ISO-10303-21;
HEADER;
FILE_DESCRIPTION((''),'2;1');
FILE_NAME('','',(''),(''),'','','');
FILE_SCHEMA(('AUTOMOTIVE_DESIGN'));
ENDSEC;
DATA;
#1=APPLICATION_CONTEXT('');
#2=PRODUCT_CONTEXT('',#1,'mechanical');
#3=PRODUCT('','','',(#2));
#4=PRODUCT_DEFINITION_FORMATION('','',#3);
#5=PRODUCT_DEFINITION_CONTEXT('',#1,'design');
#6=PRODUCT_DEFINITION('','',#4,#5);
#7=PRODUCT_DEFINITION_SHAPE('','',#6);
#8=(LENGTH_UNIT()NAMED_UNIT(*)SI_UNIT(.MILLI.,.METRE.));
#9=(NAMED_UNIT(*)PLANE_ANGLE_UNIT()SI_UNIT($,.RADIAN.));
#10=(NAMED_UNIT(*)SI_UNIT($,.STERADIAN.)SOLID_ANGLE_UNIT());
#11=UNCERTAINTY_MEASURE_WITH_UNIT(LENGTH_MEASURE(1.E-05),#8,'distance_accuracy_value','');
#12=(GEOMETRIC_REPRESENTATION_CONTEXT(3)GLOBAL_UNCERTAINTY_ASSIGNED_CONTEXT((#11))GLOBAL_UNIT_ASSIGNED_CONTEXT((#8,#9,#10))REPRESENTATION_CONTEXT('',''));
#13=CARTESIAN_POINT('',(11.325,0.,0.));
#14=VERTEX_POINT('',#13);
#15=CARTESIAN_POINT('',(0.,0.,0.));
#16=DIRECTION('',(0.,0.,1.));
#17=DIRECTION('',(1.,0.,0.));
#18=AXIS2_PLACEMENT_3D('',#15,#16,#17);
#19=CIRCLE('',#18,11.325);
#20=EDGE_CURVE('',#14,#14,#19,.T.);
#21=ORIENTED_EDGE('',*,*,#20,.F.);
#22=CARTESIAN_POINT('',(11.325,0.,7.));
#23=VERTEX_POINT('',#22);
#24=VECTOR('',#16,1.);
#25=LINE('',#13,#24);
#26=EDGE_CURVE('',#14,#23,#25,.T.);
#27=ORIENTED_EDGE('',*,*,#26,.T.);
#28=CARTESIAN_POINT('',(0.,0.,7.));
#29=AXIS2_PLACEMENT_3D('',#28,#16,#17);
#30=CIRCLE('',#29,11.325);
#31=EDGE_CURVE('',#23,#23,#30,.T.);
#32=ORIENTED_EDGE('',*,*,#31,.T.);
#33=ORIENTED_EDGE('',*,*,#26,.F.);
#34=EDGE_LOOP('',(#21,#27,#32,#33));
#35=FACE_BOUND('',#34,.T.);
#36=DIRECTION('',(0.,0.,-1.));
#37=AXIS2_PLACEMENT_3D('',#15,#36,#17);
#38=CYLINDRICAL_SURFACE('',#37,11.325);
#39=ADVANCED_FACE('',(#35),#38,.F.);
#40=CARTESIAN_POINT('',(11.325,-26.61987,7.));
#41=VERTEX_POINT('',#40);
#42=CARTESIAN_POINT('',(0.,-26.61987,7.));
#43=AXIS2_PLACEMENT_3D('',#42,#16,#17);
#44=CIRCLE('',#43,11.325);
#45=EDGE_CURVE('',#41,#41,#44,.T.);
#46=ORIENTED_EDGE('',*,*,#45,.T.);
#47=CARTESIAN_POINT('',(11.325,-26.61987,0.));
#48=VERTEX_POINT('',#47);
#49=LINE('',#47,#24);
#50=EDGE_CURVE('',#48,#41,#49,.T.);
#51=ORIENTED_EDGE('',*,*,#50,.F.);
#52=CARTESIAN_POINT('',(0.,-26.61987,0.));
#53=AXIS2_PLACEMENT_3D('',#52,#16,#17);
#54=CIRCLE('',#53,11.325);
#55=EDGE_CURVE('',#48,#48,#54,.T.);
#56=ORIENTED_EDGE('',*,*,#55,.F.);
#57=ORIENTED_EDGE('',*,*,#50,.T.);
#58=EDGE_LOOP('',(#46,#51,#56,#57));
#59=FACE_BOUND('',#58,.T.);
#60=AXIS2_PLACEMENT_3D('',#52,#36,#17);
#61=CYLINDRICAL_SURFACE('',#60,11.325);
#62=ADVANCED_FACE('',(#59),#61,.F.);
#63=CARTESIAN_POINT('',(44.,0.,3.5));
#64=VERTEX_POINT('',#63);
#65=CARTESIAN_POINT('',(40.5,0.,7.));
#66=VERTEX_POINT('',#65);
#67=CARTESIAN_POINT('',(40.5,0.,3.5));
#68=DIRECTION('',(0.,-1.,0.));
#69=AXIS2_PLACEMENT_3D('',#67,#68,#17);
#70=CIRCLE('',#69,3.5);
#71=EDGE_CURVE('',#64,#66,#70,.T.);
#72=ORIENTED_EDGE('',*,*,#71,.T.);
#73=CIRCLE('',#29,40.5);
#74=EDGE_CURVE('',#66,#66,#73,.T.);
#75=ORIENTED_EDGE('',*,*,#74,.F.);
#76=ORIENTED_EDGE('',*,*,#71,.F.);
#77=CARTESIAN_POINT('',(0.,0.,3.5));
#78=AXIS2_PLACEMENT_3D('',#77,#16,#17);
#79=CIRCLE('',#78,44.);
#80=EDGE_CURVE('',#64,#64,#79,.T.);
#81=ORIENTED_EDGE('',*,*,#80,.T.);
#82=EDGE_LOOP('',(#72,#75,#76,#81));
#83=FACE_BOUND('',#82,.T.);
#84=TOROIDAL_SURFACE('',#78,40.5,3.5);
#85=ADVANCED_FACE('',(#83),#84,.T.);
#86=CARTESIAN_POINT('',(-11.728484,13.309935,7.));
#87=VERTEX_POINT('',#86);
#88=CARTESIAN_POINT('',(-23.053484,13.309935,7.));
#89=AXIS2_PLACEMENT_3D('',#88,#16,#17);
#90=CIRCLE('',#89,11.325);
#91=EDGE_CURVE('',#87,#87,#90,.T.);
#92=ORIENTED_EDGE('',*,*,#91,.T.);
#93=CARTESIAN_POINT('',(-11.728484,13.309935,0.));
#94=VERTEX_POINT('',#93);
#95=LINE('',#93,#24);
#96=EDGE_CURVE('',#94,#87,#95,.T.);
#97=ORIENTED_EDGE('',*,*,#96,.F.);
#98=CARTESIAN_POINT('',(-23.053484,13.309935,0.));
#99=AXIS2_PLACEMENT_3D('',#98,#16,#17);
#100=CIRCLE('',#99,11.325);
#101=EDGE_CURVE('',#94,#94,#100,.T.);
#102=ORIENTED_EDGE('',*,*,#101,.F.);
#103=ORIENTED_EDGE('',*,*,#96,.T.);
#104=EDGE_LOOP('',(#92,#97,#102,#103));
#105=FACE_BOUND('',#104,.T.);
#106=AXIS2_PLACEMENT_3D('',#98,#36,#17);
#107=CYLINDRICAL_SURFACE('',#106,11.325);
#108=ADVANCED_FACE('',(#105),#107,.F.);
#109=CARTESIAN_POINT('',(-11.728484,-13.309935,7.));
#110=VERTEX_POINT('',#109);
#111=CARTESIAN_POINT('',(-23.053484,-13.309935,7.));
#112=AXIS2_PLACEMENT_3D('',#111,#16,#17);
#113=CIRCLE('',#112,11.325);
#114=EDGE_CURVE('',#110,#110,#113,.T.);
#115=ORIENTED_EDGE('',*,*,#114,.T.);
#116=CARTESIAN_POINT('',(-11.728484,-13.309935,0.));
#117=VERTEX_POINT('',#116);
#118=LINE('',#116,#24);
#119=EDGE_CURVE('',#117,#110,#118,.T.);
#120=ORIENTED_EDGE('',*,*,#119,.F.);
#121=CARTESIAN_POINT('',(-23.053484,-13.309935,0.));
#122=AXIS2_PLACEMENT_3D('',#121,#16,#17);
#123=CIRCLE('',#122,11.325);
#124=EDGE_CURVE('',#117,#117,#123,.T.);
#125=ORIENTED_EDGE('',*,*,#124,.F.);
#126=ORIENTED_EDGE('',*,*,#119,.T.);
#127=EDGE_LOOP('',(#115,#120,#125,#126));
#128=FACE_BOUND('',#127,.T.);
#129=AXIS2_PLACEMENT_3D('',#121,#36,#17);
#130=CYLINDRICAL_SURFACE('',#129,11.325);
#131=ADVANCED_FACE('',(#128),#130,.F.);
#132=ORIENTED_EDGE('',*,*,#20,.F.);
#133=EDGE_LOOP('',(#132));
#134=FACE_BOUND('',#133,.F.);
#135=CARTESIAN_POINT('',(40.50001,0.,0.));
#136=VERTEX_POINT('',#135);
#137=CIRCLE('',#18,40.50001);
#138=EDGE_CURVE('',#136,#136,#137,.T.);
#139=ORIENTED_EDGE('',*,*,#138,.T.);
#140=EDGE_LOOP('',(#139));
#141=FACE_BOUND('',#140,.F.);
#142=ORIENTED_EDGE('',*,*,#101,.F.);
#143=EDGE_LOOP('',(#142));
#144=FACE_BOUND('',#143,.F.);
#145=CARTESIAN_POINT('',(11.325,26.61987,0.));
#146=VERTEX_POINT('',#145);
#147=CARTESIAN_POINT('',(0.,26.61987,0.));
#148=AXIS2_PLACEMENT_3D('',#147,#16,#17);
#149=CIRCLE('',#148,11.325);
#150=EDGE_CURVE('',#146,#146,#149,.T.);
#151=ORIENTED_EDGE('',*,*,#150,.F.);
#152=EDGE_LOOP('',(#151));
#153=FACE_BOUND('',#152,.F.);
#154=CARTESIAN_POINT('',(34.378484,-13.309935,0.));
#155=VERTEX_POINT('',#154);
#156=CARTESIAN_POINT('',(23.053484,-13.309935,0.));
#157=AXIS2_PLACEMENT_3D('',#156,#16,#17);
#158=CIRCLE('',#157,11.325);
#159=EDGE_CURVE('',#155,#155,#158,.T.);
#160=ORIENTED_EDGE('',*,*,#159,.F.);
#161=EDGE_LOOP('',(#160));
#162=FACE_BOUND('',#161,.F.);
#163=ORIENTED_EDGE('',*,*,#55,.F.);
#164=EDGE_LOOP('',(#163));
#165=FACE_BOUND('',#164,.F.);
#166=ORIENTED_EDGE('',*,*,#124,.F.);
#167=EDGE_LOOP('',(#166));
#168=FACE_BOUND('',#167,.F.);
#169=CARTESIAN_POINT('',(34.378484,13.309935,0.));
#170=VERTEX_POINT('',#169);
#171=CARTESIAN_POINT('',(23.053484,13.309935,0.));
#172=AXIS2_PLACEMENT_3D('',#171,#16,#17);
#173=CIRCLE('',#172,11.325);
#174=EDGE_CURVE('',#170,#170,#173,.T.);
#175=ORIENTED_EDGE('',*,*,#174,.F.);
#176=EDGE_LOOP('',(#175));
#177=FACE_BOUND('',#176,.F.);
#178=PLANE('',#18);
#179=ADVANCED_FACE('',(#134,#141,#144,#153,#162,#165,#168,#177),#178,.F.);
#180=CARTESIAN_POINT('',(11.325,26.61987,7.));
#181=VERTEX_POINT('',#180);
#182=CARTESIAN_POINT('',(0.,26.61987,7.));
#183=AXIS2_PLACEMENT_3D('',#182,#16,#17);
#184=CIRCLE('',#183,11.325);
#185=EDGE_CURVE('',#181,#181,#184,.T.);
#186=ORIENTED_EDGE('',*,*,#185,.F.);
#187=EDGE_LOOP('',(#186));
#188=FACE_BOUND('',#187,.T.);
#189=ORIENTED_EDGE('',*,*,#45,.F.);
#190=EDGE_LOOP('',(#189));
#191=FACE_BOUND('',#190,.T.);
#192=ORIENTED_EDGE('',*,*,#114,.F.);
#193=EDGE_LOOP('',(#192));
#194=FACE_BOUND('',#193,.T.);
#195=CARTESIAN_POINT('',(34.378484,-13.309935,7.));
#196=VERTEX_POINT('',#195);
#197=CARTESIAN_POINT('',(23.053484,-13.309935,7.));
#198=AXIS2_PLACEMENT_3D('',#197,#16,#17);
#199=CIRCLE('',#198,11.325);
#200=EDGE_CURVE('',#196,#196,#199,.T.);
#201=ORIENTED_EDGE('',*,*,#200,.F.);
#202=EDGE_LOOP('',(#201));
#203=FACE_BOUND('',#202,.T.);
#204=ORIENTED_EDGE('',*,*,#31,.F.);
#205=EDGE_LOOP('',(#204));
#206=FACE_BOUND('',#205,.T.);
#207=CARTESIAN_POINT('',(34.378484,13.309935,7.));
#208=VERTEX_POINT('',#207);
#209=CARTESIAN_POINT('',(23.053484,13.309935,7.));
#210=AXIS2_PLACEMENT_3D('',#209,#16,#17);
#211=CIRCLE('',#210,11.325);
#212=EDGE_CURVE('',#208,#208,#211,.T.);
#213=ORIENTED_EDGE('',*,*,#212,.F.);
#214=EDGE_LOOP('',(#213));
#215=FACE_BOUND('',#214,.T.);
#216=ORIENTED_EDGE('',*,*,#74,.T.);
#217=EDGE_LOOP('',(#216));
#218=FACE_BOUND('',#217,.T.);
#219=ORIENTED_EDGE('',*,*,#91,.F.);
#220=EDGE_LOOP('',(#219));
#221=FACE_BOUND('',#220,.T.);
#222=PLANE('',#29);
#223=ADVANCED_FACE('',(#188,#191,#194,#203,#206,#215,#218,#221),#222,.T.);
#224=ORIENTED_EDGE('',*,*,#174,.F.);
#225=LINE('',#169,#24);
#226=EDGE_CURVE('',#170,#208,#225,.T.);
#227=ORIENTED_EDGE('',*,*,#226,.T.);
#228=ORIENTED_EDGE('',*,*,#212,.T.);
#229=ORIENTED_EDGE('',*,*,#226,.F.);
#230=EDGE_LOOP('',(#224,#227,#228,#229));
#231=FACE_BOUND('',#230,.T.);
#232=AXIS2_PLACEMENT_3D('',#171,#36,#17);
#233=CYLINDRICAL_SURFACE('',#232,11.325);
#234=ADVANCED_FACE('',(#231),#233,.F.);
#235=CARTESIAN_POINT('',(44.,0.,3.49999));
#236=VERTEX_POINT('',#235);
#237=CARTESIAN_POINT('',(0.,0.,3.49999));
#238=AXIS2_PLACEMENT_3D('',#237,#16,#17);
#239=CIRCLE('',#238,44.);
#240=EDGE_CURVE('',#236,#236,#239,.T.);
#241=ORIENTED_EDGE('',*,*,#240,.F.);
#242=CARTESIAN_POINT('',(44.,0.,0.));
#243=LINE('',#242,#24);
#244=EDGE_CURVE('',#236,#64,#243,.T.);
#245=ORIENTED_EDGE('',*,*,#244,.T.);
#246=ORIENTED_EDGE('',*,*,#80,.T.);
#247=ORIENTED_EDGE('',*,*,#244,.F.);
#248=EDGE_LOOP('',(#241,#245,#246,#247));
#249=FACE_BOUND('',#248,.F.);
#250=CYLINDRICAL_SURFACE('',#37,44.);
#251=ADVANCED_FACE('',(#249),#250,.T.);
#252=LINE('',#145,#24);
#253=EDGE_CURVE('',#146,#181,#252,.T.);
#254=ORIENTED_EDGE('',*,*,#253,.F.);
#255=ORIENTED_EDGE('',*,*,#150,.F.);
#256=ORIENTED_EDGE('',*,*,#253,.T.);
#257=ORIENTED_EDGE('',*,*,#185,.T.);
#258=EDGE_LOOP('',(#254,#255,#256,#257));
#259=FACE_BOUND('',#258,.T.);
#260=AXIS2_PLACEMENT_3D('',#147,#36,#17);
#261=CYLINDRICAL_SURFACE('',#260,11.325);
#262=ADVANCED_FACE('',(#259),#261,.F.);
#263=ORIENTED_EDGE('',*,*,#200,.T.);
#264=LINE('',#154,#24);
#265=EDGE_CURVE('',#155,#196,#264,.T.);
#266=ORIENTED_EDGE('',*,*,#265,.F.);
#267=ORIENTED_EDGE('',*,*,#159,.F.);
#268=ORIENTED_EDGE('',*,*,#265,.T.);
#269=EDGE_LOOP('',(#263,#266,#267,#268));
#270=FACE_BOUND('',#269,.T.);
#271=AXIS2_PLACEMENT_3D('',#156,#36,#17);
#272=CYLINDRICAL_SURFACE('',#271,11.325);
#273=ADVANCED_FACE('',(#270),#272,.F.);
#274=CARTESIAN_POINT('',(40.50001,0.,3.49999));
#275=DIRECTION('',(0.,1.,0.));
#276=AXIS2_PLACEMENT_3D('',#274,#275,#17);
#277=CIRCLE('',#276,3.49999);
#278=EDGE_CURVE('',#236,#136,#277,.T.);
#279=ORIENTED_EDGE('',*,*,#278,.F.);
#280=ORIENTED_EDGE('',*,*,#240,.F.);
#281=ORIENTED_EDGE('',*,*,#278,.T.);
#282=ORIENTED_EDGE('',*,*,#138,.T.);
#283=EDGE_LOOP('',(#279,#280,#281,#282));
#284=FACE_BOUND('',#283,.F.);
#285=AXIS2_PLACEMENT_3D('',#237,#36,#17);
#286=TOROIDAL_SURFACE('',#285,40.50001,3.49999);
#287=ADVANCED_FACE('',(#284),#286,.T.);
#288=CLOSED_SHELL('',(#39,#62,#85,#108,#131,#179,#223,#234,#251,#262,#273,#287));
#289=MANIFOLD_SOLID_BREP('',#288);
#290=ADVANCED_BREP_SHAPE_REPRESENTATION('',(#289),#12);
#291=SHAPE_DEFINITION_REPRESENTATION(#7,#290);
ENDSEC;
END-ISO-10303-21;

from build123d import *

# Parameters (mm, degrees)
F0_R     = 44
F0_R_2   = 11.325
F1_DEPTH = 7
F2_R     = 3.5
F3_R     = 3.49999


# Not quite as in the source:
# - a fillet or chamfer is up to 0.001 mm smaller than in the source, because OpenCascade refuses the exact size


with BuildPart() as f1:
    # F0 (on Top) → F1 (new body)
    with BuildSketch(Plane.XY):
        Circle(F0_R)
        with Locations((-23.0534838522, -13.3099351078)):
            Circle(F0_R_2, mode=Mode.SUBTRACT)
        with Locations((0, -26.6198702157)):
            Circle(F0_R_2, mode=Mode.SUBTRACT)
        with Locations((23.0534838522, -13.3099351078)):
            Circle(F0_R_2, mode=Mode.SUBTRACT)
        with Locations((-23.0534838522, 13.3099351078)):
            Circle(F0_R_2, mode=Mode.SUBTRACT)
        Circle(F0_R_2, mode=Mode.SUBTRACT)
        with Locations((23.0534838522, 13.3099351078)):
            Circle(F0_R_2, mode=Mode.SUBTRACT)
        with Locations((0, 26.6198702157)):
            Circle(F0_R_2, mode=Mode.SUBTRACT)
    extrude(amount=F1_DEPTH)

    # F2
    f2_edges = [f1.edges().sort_by_distance(p)[0] for p in [
        (-44, 0, 7),
    ]]
    fillet(f2_edges, radius=F2_R)

    # F3 (radius 3.5 in the source; OpenCascade refuses exactly that, so slightly less here)
    f3_edges = [f1.edges().sort_by_distance(p)[0] for p in [
        (-44, 0, 0),
    ]]
    fillet(f3_edges, radius=F3_R)


solid = f1.part
